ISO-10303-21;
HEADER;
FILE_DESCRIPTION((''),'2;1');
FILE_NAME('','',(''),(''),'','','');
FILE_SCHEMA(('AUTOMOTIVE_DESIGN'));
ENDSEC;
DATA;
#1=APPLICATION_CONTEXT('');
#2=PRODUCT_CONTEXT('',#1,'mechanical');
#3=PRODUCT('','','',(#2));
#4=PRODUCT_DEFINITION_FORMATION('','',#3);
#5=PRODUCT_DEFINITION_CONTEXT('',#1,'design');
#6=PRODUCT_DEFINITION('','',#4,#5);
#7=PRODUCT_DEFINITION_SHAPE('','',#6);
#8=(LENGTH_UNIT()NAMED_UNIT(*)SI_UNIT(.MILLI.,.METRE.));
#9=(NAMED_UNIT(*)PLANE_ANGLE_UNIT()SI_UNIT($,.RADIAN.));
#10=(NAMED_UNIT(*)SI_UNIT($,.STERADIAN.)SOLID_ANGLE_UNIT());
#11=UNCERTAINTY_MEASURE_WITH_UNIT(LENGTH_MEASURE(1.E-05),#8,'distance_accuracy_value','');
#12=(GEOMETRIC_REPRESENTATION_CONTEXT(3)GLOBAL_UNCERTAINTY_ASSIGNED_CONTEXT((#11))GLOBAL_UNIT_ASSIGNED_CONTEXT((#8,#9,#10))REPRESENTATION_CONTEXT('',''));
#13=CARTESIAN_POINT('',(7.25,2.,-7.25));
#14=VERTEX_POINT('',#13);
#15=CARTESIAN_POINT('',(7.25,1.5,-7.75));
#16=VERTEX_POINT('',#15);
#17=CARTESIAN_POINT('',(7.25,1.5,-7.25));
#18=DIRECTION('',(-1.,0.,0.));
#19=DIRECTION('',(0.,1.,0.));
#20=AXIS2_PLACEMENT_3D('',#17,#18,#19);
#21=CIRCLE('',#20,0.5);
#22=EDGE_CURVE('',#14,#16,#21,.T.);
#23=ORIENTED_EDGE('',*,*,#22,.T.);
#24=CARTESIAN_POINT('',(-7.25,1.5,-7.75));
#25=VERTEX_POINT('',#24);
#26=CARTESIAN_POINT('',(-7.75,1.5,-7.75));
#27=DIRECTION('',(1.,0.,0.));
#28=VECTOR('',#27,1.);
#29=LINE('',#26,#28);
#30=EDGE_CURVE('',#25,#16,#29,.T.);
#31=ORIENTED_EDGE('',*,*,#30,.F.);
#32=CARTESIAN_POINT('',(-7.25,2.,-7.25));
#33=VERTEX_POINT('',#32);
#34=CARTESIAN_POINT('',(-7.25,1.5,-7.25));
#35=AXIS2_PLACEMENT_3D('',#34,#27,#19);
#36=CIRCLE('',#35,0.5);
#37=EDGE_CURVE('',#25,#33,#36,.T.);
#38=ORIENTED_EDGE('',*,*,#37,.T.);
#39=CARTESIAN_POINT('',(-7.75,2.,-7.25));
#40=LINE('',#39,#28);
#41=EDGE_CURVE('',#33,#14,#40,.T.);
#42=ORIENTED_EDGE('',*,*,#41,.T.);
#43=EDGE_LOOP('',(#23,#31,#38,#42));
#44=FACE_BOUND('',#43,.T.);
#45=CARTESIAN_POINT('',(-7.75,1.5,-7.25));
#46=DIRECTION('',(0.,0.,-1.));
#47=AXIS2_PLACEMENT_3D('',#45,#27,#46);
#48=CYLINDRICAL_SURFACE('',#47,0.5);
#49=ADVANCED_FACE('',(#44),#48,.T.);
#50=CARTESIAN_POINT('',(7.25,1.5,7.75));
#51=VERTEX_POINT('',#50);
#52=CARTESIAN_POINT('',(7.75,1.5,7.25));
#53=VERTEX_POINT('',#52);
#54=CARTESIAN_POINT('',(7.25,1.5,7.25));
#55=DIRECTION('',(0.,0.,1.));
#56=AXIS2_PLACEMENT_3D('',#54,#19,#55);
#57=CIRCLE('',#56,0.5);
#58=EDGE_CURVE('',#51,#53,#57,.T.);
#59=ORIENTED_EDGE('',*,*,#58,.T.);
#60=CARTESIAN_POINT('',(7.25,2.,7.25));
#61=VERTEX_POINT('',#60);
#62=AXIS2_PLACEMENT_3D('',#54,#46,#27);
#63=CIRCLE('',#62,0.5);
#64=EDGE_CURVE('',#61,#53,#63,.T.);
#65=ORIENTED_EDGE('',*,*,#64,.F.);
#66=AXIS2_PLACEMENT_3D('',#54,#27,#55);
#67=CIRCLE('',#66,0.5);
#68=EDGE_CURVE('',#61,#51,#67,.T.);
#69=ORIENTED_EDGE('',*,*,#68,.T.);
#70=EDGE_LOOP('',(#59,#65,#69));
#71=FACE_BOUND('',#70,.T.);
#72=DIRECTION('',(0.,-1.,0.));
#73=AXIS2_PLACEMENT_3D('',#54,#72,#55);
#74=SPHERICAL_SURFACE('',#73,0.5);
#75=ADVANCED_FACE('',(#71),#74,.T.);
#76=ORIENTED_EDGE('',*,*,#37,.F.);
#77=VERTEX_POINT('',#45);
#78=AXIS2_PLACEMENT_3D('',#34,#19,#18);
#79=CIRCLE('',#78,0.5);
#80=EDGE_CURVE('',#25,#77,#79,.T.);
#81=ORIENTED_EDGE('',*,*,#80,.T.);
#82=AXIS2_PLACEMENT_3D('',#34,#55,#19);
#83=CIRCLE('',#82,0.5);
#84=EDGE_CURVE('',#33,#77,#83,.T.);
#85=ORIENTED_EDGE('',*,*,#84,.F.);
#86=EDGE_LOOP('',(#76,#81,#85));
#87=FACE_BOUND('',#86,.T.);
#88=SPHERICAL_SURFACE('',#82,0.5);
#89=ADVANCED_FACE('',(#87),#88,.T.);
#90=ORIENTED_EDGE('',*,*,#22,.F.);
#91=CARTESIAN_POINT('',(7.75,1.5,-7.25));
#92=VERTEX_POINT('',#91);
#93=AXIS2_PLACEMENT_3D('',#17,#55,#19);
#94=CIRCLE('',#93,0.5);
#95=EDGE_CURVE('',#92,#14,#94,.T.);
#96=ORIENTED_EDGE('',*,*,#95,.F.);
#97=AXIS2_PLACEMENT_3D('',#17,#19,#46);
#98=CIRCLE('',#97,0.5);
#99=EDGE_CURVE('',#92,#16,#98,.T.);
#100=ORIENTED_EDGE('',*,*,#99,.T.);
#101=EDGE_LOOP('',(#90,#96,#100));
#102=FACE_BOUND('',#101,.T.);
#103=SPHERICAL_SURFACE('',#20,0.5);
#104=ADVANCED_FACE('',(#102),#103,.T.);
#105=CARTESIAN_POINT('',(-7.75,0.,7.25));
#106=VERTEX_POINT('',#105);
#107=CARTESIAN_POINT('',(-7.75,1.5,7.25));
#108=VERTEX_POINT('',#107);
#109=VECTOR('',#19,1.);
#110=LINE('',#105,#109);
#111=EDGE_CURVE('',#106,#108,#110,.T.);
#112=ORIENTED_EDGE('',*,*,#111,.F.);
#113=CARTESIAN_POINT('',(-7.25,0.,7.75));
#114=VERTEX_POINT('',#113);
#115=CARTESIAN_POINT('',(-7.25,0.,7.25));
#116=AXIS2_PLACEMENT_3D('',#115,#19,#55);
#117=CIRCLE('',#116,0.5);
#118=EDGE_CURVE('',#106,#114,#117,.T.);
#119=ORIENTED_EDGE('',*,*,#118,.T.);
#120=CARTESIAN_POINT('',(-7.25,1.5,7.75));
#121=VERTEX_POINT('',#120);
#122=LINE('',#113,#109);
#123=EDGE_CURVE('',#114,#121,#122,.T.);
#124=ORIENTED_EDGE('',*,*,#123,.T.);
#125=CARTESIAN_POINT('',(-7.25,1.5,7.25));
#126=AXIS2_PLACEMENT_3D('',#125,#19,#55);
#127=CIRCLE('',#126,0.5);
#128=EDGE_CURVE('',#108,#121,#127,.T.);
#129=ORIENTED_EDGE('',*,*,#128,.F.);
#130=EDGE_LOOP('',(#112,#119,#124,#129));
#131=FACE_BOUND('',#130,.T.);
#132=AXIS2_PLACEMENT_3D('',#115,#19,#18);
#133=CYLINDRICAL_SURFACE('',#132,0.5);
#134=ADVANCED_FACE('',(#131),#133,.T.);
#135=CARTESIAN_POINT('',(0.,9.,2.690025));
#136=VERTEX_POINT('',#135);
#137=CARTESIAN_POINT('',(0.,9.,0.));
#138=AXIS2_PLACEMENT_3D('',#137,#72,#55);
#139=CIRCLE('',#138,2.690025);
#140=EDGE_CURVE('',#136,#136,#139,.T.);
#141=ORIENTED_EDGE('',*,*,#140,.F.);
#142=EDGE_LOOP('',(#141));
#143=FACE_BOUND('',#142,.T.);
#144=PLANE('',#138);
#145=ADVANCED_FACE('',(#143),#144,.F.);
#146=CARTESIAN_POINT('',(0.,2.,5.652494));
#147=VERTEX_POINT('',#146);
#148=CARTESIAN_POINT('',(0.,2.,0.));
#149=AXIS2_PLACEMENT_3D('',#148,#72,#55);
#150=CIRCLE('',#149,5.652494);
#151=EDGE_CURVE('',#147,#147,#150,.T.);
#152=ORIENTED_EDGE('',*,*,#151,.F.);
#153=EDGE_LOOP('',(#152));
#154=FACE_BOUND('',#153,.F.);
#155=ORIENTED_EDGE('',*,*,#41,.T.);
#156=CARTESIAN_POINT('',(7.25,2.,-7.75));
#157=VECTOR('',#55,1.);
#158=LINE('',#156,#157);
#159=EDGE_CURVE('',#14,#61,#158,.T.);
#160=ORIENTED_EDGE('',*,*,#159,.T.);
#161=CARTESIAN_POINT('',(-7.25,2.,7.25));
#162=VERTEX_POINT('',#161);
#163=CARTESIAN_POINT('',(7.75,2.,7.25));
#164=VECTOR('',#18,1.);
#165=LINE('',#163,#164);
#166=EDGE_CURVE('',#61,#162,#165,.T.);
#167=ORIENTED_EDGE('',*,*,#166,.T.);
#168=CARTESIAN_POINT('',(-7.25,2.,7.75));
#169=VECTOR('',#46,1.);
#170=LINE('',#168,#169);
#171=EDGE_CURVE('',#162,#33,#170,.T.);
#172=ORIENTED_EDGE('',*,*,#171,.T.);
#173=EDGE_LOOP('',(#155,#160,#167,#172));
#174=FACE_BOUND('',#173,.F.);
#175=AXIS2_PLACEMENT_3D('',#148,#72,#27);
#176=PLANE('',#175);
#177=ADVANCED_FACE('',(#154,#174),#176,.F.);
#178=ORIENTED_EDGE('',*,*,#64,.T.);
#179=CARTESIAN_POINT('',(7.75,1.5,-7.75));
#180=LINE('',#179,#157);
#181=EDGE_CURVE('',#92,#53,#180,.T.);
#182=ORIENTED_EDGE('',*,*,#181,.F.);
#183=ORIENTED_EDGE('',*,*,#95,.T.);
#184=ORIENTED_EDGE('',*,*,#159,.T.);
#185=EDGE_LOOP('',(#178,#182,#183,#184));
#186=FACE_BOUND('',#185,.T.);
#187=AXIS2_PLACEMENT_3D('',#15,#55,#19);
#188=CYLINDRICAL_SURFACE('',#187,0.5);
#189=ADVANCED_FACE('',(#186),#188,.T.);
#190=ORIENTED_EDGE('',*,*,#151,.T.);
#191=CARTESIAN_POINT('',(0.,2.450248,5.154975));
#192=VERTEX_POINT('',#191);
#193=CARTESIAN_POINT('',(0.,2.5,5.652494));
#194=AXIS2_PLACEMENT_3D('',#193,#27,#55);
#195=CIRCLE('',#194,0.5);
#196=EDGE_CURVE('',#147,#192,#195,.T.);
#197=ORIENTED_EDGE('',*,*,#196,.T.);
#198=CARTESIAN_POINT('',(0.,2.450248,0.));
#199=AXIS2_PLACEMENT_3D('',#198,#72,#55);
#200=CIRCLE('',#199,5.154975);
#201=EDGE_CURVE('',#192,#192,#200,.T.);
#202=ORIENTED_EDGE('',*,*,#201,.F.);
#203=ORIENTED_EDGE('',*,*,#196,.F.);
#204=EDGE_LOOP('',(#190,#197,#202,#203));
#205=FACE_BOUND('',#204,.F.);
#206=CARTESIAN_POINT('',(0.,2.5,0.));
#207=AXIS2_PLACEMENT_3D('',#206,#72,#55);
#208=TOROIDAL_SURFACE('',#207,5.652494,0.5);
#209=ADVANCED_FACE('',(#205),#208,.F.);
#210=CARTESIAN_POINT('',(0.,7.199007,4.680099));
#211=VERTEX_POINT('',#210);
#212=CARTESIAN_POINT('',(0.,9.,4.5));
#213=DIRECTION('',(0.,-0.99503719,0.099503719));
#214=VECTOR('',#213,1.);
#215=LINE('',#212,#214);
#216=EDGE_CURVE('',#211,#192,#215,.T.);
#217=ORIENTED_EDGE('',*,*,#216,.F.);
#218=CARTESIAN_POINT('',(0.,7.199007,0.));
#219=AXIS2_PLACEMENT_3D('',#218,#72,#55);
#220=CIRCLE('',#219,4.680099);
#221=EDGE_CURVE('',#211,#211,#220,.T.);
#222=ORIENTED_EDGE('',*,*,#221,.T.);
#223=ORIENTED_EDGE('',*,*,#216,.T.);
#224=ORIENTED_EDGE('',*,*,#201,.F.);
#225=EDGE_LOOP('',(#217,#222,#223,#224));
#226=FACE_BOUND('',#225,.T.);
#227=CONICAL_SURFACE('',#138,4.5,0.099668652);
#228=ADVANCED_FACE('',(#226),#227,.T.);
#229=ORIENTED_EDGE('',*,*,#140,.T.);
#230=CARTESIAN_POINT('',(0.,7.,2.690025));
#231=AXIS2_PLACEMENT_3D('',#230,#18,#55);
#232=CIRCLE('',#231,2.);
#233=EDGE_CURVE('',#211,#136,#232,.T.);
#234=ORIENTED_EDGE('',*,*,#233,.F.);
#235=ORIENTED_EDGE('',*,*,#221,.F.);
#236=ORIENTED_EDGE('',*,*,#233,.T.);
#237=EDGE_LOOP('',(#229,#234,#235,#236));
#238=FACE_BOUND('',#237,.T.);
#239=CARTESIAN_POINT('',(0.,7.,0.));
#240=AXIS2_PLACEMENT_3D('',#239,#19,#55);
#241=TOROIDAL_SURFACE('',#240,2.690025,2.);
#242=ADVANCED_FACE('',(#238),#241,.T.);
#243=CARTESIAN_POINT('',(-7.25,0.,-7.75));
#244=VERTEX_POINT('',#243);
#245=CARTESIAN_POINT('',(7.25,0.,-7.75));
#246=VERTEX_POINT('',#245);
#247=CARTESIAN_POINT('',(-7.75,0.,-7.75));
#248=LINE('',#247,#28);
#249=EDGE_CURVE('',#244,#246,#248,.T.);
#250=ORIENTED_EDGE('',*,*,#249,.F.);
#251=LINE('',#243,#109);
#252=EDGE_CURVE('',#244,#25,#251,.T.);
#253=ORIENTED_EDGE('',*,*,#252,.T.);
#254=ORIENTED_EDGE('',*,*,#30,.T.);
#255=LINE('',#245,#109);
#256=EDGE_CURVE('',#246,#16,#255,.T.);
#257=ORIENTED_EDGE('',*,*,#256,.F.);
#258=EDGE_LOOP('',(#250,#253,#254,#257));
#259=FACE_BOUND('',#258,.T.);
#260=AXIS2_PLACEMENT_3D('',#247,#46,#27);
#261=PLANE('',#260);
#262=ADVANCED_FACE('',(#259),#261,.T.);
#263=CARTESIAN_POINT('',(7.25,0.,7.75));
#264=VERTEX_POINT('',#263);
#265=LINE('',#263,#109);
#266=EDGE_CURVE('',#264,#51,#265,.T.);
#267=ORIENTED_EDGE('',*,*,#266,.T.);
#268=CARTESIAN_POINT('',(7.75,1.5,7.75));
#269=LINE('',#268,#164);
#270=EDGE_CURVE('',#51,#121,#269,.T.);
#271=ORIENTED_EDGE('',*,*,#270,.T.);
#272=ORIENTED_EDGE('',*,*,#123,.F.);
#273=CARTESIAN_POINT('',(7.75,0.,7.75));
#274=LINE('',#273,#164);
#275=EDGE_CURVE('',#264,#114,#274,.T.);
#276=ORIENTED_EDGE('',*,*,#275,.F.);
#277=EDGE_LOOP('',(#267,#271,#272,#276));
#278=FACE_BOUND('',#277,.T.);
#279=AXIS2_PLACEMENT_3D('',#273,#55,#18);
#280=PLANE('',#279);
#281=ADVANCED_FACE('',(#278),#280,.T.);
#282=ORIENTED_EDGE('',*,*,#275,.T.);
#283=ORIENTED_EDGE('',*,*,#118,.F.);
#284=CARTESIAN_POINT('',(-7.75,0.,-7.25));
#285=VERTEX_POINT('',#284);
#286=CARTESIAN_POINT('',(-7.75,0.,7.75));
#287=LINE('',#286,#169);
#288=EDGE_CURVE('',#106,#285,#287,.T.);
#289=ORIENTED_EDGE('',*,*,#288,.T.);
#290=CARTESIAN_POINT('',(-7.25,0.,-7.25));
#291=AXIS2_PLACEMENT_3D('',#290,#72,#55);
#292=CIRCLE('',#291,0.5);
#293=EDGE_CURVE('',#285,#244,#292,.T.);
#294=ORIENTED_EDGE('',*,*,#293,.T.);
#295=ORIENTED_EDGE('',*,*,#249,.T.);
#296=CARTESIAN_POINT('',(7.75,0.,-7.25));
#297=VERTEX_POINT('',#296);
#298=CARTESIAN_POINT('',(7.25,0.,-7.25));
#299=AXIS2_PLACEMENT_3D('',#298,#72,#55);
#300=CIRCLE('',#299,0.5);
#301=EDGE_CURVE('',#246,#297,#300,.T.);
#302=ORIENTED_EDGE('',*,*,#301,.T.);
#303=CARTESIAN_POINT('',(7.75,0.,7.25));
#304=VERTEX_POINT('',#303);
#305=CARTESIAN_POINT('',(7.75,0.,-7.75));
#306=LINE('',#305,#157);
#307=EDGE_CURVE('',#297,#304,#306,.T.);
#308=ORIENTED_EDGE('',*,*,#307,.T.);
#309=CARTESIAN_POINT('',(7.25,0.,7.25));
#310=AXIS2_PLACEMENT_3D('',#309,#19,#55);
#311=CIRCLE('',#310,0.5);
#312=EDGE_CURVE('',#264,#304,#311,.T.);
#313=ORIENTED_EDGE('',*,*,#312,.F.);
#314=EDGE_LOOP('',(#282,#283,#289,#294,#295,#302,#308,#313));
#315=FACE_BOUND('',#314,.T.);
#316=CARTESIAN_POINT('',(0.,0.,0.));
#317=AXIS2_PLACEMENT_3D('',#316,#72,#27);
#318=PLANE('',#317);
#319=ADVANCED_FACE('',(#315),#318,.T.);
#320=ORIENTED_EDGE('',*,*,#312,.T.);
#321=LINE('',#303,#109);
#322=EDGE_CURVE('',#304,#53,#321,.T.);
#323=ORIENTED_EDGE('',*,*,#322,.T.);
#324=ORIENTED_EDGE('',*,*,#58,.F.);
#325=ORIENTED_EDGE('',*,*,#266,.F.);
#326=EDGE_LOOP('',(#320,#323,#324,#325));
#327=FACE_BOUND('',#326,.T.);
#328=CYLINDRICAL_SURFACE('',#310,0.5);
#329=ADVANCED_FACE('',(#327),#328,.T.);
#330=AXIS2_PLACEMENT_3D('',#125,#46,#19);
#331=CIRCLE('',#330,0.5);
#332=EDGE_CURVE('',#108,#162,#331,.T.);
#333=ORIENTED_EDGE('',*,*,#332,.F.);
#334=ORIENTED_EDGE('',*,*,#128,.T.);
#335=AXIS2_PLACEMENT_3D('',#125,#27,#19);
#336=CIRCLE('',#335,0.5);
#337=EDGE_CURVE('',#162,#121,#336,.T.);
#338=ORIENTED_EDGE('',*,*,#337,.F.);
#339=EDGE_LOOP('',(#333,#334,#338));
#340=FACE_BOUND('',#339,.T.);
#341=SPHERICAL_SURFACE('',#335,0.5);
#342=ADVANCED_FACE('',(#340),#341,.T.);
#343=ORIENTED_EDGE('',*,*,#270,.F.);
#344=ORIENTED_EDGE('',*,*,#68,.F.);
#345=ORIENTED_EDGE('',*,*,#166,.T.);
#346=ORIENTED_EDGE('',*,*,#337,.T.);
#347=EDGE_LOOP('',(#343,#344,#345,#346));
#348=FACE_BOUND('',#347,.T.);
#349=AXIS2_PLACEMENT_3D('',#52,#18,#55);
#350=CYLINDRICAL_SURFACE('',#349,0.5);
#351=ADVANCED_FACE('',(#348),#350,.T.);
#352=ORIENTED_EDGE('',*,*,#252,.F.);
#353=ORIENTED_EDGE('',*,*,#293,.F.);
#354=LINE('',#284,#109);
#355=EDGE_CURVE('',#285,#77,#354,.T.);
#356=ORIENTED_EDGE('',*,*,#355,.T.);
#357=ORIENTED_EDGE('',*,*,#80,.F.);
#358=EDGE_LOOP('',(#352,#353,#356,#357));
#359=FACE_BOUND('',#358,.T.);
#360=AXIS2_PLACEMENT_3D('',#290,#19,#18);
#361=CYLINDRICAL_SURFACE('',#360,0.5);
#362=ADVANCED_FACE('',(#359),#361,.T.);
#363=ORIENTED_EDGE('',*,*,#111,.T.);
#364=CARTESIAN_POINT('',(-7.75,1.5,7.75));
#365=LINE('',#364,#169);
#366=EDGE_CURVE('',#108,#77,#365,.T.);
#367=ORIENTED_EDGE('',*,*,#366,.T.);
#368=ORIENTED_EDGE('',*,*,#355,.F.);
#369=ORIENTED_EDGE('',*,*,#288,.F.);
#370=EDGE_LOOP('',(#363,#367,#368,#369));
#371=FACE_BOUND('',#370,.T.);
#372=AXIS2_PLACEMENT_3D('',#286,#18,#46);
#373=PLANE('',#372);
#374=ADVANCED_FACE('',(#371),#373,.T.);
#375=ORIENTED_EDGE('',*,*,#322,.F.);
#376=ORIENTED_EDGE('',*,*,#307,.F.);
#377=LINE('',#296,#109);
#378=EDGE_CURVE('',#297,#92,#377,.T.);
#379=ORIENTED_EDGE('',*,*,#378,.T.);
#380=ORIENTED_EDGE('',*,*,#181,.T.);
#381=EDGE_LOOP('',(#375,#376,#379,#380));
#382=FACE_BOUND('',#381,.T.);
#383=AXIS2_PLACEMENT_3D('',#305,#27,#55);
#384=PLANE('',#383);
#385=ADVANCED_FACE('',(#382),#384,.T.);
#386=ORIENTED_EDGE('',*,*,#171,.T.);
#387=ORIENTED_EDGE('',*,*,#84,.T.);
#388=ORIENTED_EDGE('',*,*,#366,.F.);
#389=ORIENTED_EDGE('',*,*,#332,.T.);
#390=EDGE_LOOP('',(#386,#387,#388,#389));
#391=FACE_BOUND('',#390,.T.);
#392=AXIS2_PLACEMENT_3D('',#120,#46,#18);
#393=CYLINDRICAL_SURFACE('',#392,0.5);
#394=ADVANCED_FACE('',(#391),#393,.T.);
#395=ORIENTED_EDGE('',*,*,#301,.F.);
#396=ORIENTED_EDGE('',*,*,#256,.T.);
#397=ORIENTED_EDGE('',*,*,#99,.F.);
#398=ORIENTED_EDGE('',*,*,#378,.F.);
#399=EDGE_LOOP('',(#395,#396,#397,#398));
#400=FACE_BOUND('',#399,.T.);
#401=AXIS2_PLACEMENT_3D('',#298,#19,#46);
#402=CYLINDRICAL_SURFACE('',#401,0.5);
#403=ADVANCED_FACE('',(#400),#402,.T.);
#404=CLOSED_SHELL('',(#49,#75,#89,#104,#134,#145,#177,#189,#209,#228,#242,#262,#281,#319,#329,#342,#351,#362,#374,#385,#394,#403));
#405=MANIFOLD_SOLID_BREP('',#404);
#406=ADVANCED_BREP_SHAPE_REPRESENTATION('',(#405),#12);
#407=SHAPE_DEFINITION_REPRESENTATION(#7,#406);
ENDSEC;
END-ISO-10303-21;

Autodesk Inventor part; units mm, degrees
ref_plane "YZ Plane" through (0, 0, 0) normal (1, 0, 0) x (0, 1, 0)
ref_plane "XZ Plane" through (0, 0, 0) normal (0, 1, 0) x (-1, 0, 0)
ref_plane "XY Plane" through (0, 0, 0) normal (0, 0, 1) x (1, 0, 0)
sketch "Sketch1" plane through (0, 0, 0) normal (1, 0, 0) x (0, 1, 0)
  line L0 (9, 0) -> (9, 4.5)
  line L1 (9, 4.5) -> (2, 5.2)
  line L2 (2, 5.2) -> (2, 7.2)
  line L3 (2, 7.2) -> (0, 7.2)
  line L4 (0, 7.2) -> (0, 0)
  line L5 (9, 0) -> (0, 0)
  dimension "d0" = 4.5
  dimension "d1" = 9
  dimension "d2" = 2
  dimension "d3" = 2
  dimension "d5" = 7.2
  dimension "d6" = 5.2
revolve "Revolution1" add sketch "Sketch1" angle 360 about axis through (0, 9, 0) along (0, -1, 0)
fillet "Fillet1" radius 2 1 edges at (0, 9, -4.5)
sketch "Sketch2" plane through (0, 0, 0) normal (0, -1, 0) x (1, 0, 0)
  line L0 (-7.75, -7.75) -> (7.75, -7.75)
  line L1 (7.75, -7.75) -> (7.75, 7.75)
  line L2 (7.75, 7.75) -> (-7.75, 7.75)
  line L3 (-7.75, 7.75) -> (-7.75, -7.75)
  line L4 (-7.75, -7.75) -> (7.75, 7.75) construction
  line L5 (7.75, -7.75) -> (-7.75, 7.75) construction
  point P0 (0, 0)
  dimension "d10" = 15.5
  dimension "d11" = 15.5
extrude "Extrusion1" add sketch "Sketch2" against normal up to surface (2 mm away)
fillet "Fillet4" radius 0.5 9 edges at (7.75, 1, 7.75) (0, 2, 7.75) (-7.75, 2, 0) (0, 2, -7.75) (7.75, 2, 0) (0, 2, -5.2) (7.75, 1, -7.75) (-7.75, 1, -7.75) (-7.75, 1, 7.75)
ref_plane "Work Plane1" through (0, 0, -7.25) normal (-1, 0, 0) x (0, 0, 1)
